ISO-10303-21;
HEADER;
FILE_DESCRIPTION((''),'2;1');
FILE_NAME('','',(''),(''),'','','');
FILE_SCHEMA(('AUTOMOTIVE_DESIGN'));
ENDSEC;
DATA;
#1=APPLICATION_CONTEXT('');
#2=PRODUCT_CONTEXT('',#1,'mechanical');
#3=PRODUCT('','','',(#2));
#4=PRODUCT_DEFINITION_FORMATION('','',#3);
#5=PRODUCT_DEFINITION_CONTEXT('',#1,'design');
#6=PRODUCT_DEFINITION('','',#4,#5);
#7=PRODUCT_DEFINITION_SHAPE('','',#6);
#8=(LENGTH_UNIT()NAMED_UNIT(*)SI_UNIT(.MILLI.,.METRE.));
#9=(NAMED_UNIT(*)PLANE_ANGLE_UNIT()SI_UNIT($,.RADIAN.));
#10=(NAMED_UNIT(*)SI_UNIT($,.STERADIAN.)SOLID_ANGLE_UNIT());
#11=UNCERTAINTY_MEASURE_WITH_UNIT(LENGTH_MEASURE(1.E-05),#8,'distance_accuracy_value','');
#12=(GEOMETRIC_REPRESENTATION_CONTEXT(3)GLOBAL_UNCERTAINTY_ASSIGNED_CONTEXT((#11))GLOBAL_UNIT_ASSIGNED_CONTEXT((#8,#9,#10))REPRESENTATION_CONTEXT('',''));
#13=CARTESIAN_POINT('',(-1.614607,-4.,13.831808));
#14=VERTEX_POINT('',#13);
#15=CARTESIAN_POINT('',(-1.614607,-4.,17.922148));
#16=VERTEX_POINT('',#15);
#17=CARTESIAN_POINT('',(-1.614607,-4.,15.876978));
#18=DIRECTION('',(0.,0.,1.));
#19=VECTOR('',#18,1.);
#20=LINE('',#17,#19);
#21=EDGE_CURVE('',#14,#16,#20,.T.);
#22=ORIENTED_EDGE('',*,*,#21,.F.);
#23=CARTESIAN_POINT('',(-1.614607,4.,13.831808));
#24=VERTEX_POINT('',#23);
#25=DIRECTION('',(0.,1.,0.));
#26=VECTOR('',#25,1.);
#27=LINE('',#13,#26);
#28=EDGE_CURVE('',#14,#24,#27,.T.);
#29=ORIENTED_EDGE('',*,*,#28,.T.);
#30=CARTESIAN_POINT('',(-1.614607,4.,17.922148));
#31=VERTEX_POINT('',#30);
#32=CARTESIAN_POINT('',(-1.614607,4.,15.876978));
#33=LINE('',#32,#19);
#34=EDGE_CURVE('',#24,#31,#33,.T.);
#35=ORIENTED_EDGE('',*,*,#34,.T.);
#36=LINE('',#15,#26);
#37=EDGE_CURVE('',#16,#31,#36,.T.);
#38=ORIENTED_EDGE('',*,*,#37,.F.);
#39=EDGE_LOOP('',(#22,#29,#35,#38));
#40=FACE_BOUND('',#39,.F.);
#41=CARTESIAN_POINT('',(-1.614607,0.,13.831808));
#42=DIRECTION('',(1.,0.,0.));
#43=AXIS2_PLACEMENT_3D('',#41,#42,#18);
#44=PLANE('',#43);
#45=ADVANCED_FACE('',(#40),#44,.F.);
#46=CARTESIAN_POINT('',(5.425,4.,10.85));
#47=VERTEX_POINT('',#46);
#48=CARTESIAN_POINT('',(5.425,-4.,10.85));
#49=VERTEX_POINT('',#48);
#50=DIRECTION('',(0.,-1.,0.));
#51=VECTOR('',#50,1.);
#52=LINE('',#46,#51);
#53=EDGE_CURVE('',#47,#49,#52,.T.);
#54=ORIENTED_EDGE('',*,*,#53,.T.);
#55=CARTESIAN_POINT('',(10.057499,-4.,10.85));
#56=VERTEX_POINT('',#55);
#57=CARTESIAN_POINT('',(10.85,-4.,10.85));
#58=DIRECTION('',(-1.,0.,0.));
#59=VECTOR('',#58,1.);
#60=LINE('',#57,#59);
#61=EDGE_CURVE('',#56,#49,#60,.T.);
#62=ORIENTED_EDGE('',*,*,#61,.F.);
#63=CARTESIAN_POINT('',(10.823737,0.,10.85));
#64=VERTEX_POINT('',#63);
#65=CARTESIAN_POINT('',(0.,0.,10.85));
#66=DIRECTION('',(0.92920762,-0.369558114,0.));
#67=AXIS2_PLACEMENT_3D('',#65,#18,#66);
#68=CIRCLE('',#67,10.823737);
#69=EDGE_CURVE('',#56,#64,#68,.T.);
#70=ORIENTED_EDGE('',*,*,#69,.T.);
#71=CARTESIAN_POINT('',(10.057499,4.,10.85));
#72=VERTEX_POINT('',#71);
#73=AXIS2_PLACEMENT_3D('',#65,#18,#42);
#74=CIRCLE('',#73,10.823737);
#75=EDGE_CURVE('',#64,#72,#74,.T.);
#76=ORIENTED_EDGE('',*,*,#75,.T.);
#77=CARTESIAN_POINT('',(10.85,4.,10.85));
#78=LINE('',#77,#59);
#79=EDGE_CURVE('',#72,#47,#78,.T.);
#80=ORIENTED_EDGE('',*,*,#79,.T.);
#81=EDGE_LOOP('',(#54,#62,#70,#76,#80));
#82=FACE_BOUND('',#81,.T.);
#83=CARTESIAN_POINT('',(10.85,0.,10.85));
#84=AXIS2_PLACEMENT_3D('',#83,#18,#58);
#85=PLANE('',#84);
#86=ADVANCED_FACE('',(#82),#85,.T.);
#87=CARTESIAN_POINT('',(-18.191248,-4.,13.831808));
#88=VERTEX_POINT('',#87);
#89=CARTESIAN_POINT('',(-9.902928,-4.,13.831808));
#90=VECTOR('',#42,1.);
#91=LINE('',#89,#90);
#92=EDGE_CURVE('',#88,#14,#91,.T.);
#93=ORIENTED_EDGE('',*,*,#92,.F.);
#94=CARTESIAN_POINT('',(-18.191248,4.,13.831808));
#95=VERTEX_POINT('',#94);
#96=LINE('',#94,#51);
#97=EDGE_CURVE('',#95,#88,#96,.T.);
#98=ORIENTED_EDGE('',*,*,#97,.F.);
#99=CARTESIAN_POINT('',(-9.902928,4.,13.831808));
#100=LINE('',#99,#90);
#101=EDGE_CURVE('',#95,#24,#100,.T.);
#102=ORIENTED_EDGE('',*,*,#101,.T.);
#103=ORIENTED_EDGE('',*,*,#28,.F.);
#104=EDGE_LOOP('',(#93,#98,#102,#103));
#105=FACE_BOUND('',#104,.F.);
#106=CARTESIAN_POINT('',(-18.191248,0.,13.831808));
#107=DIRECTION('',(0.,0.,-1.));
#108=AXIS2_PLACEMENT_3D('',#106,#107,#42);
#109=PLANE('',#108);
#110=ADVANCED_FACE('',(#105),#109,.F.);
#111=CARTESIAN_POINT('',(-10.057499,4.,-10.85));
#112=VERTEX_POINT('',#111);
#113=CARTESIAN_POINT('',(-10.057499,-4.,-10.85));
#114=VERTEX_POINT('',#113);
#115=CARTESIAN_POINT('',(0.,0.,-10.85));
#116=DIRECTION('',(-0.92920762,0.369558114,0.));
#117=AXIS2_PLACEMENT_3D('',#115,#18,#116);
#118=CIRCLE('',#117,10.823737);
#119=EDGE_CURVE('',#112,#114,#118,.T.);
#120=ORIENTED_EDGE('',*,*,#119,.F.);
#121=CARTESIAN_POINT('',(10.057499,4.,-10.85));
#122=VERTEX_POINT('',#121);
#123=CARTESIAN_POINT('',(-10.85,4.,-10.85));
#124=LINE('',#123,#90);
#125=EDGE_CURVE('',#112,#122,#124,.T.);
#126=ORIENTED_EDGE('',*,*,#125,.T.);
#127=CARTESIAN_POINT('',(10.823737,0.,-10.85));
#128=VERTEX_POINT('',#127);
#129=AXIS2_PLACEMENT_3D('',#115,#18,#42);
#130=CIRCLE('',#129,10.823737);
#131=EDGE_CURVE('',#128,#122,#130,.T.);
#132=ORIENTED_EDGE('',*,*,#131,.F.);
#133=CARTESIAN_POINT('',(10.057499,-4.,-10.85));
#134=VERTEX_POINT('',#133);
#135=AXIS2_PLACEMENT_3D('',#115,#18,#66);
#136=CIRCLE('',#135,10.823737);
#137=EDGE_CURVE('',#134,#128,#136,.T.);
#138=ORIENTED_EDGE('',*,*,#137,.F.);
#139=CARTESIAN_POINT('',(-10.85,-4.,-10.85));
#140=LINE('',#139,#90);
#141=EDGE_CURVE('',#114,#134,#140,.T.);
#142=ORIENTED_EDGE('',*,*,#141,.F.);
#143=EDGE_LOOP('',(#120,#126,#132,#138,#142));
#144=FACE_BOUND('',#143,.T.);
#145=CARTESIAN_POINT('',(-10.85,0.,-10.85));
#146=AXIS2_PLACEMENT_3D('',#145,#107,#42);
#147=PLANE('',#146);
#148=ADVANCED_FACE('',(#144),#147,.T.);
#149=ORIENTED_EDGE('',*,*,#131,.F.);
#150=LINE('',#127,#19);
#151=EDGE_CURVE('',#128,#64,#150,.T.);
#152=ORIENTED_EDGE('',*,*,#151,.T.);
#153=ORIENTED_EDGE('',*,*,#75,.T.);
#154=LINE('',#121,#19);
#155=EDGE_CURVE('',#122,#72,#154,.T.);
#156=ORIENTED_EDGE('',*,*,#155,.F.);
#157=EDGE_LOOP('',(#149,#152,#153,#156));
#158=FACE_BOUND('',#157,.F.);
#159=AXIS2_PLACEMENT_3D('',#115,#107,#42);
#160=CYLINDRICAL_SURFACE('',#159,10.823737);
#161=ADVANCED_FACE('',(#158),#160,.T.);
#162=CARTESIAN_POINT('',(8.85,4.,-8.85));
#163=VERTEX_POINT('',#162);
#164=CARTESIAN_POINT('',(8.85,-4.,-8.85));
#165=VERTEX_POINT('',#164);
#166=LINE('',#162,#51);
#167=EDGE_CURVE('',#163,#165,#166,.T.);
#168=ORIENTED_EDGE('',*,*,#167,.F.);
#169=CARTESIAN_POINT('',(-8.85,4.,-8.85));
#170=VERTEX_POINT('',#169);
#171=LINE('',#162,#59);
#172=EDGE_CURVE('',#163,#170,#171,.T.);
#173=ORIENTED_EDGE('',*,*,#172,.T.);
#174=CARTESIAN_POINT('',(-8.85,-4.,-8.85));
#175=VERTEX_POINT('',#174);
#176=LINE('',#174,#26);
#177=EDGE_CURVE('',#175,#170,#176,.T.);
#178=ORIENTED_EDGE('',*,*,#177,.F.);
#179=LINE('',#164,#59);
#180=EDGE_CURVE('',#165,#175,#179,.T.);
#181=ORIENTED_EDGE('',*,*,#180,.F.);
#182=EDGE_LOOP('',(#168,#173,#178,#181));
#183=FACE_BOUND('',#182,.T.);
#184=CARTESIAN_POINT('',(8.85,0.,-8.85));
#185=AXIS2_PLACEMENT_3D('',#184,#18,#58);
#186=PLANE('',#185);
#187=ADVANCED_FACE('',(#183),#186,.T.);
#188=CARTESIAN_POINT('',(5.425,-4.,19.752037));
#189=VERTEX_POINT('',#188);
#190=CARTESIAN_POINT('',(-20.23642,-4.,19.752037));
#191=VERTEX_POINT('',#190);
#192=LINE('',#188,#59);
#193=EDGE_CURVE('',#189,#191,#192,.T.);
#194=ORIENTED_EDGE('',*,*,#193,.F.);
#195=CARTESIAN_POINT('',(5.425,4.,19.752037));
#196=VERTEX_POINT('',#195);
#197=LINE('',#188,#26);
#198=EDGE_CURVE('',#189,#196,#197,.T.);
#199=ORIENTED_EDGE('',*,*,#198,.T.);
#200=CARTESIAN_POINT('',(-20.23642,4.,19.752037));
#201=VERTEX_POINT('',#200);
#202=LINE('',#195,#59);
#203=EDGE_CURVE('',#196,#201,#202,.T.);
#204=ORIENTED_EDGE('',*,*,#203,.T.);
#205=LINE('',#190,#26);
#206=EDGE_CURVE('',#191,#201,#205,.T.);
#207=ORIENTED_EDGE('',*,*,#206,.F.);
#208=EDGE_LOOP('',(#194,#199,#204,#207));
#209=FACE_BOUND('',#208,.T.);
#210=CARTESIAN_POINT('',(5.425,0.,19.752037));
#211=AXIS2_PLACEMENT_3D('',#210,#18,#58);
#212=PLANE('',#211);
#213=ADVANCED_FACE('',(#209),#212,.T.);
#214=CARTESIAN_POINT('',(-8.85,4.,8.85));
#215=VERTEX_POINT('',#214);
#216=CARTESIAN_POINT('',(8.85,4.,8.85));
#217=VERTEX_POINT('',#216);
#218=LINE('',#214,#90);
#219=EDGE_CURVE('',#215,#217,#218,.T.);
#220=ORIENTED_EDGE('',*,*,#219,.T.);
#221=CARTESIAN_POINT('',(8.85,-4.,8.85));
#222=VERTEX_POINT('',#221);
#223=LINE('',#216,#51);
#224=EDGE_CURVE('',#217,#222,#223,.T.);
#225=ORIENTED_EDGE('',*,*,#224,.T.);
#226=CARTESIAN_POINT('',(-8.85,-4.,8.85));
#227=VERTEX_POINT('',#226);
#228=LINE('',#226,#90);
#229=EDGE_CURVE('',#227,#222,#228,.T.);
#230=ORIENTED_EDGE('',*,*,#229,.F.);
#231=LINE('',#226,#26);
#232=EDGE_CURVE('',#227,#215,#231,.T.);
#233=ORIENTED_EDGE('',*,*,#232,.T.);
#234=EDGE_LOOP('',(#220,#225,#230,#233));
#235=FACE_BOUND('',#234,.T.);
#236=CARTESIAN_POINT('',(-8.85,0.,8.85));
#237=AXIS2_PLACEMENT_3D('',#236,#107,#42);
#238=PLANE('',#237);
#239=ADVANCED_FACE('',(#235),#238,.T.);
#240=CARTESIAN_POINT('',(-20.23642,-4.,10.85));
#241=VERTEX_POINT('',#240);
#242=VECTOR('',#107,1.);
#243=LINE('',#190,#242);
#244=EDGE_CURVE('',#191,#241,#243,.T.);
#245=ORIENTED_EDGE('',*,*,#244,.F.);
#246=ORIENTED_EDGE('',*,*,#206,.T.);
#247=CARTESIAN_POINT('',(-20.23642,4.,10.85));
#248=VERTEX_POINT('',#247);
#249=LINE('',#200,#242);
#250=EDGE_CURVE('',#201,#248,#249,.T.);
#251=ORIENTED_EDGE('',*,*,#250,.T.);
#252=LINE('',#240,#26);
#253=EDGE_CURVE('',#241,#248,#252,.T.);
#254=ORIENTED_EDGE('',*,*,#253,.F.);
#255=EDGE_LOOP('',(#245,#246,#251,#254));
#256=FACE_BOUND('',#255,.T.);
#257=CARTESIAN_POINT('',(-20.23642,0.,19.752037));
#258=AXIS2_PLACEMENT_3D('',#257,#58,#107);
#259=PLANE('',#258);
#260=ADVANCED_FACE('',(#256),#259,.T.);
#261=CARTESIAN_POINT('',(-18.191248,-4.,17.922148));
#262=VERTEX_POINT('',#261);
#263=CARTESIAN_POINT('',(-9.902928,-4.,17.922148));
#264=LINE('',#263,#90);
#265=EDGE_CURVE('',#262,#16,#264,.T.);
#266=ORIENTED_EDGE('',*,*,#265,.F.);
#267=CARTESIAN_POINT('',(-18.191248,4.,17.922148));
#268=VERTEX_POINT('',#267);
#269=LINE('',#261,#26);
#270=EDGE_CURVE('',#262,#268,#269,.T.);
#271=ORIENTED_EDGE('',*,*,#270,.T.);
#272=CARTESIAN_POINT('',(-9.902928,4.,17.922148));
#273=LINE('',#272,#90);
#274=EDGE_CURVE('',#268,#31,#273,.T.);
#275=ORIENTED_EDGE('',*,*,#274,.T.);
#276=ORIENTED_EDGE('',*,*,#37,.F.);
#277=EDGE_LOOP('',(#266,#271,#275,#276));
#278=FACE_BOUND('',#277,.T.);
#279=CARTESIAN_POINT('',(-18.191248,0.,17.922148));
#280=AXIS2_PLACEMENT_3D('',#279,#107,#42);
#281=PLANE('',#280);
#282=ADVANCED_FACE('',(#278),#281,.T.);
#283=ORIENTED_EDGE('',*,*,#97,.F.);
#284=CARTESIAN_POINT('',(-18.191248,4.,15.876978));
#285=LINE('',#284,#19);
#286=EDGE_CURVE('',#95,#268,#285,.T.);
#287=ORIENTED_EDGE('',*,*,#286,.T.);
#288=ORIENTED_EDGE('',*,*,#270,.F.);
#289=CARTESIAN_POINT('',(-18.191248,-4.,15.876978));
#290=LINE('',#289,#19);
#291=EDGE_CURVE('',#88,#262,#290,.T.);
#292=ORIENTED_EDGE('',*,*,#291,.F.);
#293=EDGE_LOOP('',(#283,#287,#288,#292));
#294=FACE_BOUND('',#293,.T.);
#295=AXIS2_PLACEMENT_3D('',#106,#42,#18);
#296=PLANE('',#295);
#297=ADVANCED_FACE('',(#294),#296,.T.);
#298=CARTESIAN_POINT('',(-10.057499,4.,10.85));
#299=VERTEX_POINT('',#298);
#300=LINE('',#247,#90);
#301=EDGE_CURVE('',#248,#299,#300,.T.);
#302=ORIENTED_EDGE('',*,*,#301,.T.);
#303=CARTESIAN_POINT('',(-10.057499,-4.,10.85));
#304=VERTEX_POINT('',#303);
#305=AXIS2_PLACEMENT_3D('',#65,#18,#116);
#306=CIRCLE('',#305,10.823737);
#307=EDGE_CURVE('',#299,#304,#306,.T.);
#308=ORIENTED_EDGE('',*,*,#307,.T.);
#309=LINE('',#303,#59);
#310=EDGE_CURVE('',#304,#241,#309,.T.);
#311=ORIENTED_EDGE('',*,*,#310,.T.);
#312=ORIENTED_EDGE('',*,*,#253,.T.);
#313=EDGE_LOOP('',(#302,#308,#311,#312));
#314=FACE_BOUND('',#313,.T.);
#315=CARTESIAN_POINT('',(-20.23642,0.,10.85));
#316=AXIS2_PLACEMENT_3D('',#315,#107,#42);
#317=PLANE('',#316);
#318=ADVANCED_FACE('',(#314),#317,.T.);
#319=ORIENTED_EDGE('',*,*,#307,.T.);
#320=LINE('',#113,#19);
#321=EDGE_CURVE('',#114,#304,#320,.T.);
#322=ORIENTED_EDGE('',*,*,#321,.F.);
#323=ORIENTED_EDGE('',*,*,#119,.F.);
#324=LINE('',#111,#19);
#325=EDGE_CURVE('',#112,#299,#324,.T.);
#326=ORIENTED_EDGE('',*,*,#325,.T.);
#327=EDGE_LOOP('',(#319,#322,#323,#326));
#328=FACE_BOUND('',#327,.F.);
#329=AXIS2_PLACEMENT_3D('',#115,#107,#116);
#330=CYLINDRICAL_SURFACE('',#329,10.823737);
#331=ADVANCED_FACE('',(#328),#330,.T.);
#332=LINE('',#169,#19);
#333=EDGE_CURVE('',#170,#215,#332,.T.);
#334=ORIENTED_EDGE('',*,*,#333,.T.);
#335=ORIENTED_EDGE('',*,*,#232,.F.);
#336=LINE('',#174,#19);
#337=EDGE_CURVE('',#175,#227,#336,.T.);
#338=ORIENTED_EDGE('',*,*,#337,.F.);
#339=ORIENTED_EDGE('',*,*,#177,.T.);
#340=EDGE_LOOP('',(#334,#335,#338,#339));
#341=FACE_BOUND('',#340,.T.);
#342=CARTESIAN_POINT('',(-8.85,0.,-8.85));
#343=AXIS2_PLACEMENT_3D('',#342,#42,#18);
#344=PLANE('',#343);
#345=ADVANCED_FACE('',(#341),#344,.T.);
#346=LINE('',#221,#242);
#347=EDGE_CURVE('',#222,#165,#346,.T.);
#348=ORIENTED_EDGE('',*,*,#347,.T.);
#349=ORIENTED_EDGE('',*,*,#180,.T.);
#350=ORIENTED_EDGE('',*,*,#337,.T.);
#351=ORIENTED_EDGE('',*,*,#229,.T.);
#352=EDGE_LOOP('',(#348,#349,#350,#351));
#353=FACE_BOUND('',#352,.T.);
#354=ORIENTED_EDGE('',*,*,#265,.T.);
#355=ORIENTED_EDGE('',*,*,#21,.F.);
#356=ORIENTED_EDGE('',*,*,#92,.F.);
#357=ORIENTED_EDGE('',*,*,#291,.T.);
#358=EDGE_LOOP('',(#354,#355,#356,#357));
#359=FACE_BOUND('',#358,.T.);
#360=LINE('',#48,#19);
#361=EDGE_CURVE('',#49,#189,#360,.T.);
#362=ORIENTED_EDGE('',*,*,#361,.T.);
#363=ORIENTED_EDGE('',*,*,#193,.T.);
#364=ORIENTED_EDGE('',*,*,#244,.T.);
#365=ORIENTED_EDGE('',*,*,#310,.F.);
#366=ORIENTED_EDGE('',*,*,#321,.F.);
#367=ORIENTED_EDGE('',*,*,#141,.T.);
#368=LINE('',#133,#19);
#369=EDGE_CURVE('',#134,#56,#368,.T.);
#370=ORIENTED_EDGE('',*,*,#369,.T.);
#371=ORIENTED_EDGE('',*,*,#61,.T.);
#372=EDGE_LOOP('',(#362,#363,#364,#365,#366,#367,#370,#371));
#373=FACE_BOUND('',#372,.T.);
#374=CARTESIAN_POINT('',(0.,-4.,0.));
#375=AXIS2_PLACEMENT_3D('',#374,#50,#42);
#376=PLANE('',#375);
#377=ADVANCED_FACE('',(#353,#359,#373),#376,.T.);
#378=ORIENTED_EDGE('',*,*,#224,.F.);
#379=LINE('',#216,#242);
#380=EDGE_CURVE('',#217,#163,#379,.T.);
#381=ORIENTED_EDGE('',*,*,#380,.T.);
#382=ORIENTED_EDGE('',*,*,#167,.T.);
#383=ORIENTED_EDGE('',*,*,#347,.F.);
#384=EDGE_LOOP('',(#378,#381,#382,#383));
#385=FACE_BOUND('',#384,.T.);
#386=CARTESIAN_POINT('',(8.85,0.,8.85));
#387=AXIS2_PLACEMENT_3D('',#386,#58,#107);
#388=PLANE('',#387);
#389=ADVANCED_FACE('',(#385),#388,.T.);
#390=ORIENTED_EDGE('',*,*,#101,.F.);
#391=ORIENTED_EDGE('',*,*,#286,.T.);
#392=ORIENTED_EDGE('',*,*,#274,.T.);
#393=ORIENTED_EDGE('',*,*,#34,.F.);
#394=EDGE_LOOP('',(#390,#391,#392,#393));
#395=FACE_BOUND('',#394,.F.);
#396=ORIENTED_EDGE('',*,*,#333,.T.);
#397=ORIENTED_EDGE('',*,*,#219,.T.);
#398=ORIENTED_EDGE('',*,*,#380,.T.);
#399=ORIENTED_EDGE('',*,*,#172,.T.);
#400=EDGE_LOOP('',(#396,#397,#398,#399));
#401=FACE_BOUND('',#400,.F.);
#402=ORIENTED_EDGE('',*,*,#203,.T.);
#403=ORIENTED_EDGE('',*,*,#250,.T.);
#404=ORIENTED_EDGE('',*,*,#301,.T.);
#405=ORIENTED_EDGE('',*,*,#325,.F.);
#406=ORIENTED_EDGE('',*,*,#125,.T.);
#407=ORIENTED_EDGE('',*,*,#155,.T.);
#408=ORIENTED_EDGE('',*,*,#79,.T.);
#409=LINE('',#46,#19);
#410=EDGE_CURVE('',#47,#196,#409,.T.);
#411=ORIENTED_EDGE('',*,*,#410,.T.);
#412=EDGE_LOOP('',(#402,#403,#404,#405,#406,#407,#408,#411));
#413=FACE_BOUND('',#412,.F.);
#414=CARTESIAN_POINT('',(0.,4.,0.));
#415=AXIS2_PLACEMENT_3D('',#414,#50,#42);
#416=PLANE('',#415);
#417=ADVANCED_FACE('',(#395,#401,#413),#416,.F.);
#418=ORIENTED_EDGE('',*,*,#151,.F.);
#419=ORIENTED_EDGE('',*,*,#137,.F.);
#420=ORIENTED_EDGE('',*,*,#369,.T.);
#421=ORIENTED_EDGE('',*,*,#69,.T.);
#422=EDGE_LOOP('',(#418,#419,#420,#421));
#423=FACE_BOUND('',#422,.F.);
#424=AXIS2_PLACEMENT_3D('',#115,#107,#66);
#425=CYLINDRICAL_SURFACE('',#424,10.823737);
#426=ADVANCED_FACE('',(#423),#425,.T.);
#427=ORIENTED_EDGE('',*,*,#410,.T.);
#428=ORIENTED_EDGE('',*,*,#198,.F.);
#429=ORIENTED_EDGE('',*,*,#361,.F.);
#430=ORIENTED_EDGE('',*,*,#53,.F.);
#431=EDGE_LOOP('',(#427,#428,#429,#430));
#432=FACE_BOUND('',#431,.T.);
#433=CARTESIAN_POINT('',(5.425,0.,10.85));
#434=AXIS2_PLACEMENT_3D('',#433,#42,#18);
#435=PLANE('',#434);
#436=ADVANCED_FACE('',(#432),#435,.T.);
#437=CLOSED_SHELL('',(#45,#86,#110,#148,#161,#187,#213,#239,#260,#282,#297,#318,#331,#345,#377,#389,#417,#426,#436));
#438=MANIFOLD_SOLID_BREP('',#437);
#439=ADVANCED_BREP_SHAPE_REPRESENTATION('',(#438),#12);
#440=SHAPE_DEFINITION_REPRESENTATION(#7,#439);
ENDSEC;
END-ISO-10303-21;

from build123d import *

# Parameters (mm, degrees)
F0_W          = 16.5766410064
F0_H          = 4.0903398767
F1_DEPTH      = 4
F1_DEPTH_BACK = 4
F3_DEPTH      = 21.7


with BuildPart() as f1:
    # F0 (on Front) → F1 (new body, two sides)
    with BuildSketch(Plane.XZ) as f1_sk:
        Polygon((-10.85, 10.85), (-10.85, 0), (-10.85, -10.85), (0, -10.85), (10.85, -10.85), (10.85, 0), (10.85, 10.85), (5.425, 10.85), (0, 10.85), align=None)
        Polygon((8.85, 8.85), (8.85, 0), (8.85, -8.85), (0, -8.85), (-8.85, -8.85), (-8.85, 0), (-8.85, 8.85), (0, 8.85), align=None, mode=Mode.SUBTRACT)
        Polygon((-20.2364195138, 10.85), (-10.85, 10.85), (0, 10.85), (5.425, 10.85), (5.425, 19.7520367801), (-20.2364195138, 19.7520367801), align=None)
        with Locations((-9.9029276753, 15.8769781701)):
            Rectangle(F0_W, F0_H, mode=Mode.SUBTRACT)
    extrude(amount=F1_DEPTH)
    extrude(f1_sk.sketch, amount=-F1_DEPTH_BACK)

    # F2 (on face) → F3 (cut)
    with BuildSketch(Plane(origin=(0, 0, -10.85), x_dir=(1, 0, 0), z_dir=(0, 0, -1))):
        with BuildLine():
            Line((13.9217844345, 4.8126999282), (9.694906495, 4.8126999282))
            ThreePointArc((9.694906495, 4.8126999282), (9.8845588749, 4.4100780486), (10.0574993187, 4))
            Line((10.0574993187, 4), (10.85, 4))
            Line((10.85, 4), (10.85, -4))
            Line((10.85, -4), (10.0574993187, -4))
            ThreePointArc((10.0574993187, -4), (9.8311449192, -4.52790041), (9.5771050518, -5.0430498086))
            Line((9.5771050518, -5.0430498086), (13.9217844345, -5.0430498086))
            Line((13.9217844345, -5.0430498086), (13.9217844345, 4.8126999282))
        make_face()
        with BuildLine():
            Line((10.85, 4), (10.0574993187, 4))
            ThreePointArc((10.0574993187, 4), (10.6304521223, 2.0363644618), (10.8237374574, 0))
            ThreePointArc((10.8237374574, 0), (10.6304521223, -2.0363644618), (10.0574993187, -4))
            Line((10.0574993187, -4), (10.85, -4))
            Line((10.85, -4), (10.85, 4))
        make_face()
        with BuildLine():
            ThreePointArc((-10.0574993187, -4), (-10.8237374574, 0), (-10.0574993187, 4))
            Line((-10.0574993187, 4), (-10.85, 4))
            Line((-10.85, 4), (-10.85, -4))
            Line((-10.85, -4), (-10.0574993187, -4))
        make_face()
    extrude(amount=-F3_DEPTH, mode=Mode.SUBTRACT)


solid = f1.part
